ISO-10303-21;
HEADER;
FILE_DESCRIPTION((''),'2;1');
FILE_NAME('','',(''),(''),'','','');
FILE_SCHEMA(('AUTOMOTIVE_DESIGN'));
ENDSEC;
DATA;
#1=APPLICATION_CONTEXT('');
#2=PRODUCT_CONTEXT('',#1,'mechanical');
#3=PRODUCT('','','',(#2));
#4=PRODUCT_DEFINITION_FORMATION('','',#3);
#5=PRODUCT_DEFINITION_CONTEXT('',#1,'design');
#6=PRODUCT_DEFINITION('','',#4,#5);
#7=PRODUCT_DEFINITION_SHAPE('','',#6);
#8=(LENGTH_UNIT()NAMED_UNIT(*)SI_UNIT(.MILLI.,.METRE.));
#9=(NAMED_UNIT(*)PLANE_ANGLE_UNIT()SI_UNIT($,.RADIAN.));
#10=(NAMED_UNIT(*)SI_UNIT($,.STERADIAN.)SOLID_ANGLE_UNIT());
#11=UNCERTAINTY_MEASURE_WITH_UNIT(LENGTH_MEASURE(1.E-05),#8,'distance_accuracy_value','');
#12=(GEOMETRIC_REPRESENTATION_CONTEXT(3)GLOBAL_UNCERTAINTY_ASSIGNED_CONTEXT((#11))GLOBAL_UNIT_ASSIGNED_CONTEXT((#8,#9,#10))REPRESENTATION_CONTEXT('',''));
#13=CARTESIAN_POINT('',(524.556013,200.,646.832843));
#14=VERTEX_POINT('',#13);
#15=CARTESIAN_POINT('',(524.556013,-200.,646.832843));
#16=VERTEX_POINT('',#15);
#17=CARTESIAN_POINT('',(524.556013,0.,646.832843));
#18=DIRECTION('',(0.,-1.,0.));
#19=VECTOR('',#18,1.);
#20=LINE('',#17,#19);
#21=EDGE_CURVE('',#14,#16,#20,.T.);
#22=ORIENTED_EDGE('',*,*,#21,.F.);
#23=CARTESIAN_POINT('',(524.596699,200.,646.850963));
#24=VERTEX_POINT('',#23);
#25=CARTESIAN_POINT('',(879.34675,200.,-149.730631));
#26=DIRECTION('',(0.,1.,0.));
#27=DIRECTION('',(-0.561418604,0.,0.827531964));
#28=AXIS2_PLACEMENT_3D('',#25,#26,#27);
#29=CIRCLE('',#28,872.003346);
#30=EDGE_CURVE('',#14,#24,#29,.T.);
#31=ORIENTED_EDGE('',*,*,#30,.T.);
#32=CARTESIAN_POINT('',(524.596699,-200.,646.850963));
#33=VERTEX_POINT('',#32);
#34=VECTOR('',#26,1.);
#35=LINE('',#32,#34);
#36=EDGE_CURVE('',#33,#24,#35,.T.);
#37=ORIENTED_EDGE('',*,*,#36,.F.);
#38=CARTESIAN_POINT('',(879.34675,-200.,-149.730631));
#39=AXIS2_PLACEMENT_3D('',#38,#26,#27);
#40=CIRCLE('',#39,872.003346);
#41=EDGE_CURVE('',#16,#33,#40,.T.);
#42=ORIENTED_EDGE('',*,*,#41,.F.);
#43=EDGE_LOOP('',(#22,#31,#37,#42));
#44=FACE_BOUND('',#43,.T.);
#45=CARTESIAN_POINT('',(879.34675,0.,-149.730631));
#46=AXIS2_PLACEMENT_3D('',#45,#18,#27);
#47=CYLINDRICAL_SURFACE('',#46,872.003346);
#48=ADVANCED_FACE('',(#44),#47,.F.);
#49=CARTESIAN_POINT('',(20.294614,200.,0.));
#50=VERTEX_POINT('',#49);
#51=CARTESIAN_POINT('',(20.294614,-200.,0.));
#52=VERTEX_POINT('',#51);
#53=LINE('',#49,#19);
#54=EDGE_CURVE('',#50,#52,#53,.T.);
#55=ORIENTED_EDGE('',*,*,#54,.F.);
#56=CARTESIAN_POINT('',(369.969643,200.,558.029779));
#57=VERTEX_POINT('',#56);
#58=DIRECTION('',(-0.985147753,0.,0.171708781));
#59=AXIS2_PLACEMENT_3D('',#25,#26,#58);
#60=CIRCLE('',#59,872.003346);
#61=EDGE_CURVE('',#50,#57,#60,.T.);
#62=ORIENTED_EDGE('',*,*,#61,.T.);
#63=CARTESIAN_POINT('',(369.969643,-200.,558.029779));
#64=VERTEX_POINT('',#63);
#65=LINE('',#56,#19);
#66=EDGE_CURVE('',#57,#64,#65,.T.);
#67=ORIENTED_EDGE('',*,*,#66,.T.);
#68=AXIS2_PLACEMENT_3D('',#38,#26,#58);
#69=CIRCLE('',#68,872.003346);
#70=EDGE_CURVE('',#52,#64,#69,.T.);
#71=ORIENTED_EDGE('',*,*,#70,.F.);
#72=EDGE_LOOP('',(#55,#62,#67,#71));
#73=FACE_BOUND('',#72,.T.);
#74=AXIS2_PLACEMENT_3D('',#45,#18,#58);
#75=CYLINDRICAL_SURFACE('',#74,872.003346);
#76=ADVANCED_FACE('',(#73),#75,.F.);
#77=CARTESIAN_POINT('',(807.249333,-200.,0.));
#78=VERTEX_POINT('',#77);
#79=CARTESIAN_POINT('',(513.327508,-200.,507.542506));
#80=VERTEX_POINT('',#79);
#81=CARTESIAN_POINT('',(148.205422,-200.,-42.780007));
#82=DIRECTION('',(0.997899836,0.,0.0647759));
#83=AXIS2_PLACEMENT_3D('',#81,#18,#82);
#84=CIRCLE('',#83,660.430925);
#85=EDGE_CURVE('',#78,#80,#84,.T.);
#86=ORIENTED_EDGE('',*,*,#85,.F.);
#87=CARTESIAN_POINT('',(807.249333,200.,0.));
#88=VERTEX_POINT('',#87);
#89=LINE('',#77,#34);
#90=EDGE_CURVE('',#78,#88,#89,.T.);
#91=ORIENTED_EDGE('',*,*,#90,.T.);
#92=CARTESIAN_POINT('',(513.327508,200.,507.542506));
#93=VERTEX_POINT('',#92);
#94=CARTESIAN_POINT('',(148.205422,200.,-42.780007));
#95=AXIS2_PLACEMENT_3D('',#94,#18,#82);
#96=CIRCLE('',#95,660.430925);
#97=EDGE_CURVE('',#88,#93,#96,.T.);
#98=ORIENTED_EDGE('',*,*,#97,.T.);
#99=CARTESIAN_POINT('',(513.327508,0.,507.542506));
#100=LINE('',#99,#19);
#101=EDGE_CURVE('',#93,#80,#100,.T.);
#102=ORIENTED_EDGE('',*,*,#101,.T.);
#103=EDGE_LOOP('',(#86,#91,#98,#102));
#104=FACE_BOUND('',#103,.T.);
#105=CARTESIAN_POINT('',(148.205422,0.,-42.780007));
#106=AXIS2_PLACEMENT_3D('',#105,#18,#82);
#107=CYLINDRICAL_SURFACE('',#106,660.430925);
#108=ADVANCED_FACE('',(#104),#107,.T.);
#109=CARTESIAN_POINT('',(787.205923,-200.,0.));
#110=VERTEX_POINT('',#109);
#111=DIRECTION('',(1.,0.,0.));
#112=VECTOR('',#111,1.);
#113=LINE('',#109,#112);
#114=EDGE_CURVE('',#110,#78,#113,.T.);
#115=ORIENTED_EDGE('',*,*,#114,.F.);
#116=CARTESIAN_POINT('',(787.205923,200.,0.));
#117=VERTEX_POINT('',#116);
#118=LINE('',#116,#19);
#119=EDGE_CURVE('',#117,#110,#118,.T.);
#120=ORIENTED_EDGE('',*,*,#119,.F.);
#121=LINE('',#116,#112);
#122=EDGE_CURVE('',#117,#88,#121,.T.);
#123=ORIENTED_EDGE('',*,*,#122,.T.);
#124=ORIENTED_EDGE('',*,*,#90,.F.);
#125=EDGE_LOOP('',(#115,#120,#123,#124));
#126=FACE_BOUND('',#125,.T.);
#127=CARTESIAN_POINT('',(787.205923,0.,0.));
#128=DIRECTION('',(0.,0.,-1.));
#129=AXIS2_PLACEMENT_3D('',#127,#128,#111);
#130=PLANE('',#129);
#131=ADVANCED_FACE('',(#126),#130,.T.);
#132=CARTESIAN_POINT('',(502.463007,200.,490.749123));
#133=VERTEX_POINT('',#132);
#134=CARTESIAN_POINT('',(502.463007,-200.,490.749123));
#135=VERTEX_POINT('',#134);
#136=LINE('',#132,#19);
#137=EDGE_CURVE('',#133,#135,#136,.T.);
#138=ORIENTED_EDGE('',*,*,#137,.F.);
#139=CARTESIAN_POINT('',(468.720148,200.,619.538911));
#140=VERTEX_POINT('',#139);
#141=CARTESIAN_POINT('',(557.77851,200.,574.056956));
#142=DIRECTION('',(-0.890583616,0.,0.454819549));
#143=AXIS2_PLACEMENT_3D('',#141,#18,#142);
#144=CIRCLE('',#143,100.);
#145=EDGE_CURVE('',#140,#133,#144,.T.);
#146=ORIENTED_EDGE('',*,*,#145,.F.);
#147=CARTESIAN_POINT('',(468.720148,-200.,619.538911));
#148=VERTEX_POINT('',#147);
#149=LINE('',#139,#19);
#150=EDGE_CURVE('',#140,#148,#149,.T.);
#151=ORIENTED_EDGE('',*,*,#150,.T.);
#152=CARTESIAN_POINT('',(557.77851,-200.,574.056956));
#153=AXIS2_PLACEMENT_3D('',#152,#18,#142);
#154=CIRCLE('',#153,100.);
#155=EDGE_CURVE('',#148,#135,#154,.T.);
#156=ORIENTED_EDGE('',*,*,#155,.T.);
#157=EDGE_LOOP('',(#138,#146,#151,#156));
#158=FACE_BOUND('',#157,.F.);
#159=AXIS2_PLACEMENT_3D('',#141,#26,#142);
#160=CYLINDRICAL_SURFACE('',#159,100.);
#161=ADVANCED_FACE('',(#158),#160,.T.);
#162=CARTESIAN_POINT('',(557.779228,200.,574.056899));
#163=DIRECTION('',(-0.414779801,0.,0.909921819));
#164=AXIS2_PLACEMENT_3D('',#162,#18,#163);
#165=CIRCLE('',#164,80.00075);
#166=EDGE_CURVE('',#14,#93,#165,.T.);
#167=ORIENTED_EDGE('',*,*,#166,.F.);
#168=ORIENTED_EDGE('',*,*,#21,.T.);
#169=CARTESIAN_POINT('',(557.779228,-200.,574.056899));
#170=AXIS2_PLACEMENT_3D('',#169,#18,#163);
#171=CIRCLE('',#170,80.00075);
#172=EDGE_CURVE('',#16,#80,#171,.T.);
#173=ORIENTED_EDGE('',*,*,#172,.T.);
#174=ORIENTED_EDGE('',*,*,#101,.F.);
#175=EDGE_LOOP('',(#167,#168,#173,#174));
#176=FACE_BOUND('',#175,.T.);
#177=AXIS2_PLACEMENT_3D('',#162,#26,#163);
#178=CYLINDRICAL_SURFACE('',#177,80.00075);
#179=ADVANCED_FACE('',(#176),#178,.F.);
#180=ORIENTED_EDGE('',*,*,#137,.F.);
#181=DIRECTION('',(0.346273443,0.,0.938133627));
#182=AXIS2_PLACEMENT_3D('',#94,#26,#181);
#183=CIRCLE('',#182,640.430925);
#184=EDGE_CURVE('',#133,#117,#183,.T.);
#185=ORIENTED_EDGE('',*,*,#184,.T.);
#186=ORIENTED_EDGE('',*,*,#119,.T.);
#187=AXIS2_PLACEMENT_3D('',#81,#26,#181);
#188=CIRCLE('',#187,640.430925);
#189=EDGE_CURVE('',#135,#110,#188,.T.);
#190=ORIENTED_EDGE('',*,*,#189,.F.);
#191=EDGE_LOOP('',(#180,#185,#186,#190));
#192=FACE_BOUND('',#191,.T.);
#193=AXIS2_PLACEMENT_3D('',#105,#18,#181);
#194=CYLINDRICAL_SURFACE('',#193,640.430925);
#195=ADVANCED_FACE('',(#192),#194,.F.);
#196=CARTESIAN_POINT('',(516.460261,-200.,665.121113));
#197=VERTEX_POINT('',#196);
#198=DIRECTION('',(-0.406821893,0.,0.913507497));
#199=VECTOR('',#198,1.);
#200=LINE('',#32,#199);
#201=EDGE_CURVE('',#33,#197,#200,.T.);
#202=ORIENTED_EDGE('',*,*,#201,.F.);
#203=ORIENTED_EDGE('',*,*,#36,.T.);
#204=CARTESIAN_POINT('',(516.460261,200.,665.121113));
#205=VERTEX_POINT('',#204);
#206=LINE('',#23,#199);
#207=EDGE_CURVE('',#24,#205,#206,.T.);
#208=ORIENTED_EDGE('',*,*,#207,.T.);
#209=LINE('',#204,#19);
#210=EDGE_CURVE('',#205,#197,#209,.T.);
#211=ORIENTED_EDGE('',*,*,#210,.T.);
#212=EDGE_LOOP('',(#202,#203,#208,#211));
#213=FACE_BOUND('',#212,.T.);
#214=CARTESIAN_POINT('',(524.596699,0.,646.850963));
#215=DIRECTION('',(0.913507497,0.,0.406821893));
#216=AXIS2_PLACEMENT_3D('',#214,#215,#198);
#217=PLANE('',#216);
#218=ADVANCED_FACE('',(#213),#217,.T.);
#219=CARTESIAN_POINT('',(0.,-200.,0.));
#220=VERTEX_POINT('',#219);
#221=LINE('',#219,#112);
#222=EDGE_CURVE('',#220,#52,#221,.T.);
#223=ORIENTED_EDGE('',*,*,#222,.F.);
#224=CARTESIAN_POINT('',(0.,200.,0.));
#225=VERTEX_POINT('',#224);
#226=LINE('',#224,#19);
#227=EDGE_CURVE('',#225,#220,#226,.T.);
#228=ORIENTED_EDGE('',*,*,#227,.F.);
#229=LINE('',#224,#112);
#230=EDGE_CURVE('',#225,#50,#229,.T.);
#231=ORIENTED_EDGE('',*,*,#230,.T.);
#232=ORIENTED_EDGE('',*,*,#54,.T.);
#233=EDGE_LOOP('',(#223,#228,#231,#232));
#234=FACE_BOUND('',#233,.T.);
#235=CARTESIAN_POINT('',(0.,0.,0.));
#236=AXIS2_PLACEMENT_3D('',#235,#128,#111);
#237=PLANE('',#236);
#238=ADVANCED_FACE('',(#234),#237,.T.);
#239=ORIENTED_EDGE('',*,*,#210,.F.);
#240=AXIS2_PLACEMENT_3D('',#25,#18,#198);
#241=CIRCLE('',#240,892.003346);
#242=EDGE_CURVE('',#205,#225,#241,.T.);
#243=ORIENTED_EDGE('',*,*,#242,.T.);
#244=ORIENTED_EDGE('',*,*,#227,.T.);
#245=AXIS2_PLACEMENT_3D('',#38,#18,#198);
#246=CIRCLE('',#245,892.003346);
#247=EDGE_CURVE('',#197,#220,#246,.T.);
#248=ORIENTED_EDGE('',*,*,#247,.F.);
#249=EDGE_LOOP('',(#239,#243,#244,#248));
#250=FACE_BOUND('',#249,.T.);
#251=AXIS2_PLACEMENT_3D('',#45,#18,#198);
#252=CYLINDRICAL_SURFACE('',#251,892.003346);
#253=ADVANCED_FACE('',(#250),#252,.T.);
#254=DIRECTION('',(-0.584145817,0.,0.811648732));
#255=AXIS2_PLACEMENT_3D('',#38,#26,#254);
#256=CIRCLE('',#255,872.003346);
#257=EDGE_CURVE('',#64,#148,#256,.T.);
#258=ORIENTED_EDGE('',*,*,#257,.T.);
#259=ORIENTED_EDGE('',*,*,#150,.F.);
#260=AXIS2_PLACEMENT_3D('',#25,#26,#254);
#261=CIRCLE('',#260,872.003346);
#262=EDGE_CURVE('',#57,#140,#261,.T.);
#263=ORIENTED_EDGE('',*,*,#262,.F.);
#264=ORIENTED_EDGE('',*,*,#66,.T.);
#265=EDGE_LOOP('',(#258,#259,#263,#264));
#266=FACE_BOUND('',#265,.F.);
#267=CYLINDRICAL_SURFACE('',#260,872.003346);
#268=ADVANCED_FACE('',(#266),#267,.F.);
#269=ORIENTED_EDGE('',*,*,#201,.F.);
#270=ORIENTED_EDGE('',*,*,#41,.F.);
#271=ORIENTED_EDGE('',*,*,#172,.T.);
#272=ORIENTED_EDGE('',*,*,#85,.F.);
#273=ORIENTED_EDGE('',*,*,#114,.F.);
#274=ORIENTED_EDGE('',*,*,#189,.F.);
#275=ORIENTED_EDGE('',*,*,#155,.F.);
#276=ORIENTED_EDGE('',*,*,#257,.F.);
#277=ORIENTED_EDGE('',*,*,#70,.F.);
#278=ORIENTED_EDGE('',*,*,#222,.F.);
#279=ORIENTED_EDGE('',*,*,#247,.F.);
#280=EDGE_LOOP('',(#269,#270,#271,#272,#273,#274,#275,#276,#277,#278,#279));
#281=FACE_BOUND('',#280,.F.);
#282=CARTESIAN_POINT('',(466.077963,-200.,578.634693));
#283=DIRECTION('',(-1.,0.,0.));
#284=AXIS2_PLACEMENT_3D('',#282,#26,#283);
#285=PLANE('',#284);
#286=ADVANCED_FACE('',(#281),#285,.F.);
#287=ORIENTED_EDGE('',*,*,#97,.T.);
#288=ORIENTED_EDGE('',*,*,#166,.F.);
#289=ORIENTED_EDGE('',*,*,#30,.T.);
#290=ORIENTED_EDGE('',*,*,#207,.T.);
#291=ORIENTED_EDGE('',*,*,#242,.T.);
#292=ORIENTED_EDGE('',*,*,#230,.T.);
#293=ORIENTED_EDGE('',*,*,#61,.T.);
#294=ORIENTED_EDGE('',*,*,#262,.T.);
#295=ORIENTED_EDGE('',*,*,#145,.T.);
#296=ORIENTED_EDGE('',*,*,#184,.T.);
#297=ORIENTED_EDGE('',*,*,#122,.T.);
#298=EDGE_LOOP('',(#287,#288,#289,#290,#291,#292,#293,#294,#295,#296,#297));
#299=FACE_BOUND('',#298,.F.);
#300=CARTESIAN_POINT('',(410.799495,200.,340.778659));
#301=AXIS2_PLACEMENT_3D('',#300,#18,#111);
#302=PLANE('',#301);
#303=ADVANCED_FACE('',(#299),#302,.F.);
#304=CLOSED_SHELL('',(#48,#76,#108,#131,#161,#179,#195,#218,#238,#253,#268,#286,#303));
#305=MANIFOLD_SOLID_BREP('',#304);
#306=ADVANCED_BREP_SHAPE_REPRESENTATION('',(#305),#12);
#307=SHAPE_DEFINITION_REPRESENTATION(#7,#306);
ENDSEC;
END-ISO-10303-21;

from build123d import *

# Parameters (mm, degrees)
F1_DEPTH      = 200
F1_DEPTH_BACK = 200
F2_T1_DEPTH   = 400
F4_DEPTH      = 400


# Not quite as in the source:
# - a fillet or chamfer that OpenCascade refuses, or shapes differently, is made with other operations: its cross-section is extruded or revolved along the edge and cut away or added


with BuildPart() as f1:
    # F0 (on Front) → F1 (new body, two sides)
    with BuildSketch(Plane.XZ) as f1_sk:
        with BuildLine():
            Line((524.5966985083, 646.8509630198), (516.4602606489, 665.1211129634))
            ThreePointArc((516.4602606489, 665.1211129634), (174.8026570637, 397.3412013082), (0, 0))
            Line((0, 0), (20.2946136834, 0))
            ThreePointArc((20.2946136834, 0), (140.429327731, 313.2929945553), (369.9696430546, 558.0297788724))
            ThreePointArc((369.9696430546, 558.0297788724), (661.1169981621, 340.7216012774), (787.2059225715, 0))
            Line((787.2059225715, 0), (807.2493330572, 0))
            ThreePointArc((807.2493330572, 0), (681.631739827, 346.6110161721), (389.7878488942, 571.8800100128))
            ThreePointArc((389.7878488942, 571.8800100128), (455.5312679724, 612.3522202116), (524.5966985083, 646.8509630198))
        make_face()
    extrude(amount=F1_DEPTH)
    extrude(f1_sk.sketch, amount=-F1_DEPTH_BACK)

    # F2: fillet of radius 80 on 1 edges, made by hand

    # F2_s2 → F2_t1 (join)
    with BuildSketch(Plane.XZ.offset(-200)):
        with BuildLine():
            ThreePointArc((524.5965325964, 646.8513269885), (478.0294026942, 580.3882007889), (513.5263540919, 507.4100453379))
            Line((513.5263540919, 507.4100453379), (509.1010667383, 500.7453599443))
            ThreePointArc((509.1010667383, 500.7453599443), (449.6679775139, 535.8272349913), (386.8614602924, 564.434377111))
            Line((386.8614602924, 564.434377111), (385.2964579687, 578.5003277629))
            ThreePointArc((385.2964579687, 578.5003277629), (451.6430451413, 619.3438525513), (521.2782630933, 654.13076976))
            Line((521.2782630933, 654.13076976), (524.5965325964, 646.8513269885))
        make_face()
    extrude(amount=F2_T1_DEPTH)

    # F3 (on face) → F4 (cut, through all)
    with BuildSketch(Plane(origin=(0, 200, 0), x_dir=(-1, 0, 0), z_dir=(0, 1, 0))):
        with BuildLine():
            ThreePointArc((-468.7201479158, 619.5389112196), (-461.0435334952, 548.7124418966), (-502.4630068664, 490.7491225353))
            ThreePointArc((-502.4630068664, 490.7491225353), (-438.1743029198, 528.2452259031), (-369.9696430546, 558.0297788724))
            ThreePointArc((-369.9696430546, 558.0297788724), (-418.3179553497, 590.4330572448), (-468.7201479158, 619.5389112196))
        make_face()
    extrude(amount=-F4_DEPTH, mode=Mode.SUBTRACT)


solid = f1.part
